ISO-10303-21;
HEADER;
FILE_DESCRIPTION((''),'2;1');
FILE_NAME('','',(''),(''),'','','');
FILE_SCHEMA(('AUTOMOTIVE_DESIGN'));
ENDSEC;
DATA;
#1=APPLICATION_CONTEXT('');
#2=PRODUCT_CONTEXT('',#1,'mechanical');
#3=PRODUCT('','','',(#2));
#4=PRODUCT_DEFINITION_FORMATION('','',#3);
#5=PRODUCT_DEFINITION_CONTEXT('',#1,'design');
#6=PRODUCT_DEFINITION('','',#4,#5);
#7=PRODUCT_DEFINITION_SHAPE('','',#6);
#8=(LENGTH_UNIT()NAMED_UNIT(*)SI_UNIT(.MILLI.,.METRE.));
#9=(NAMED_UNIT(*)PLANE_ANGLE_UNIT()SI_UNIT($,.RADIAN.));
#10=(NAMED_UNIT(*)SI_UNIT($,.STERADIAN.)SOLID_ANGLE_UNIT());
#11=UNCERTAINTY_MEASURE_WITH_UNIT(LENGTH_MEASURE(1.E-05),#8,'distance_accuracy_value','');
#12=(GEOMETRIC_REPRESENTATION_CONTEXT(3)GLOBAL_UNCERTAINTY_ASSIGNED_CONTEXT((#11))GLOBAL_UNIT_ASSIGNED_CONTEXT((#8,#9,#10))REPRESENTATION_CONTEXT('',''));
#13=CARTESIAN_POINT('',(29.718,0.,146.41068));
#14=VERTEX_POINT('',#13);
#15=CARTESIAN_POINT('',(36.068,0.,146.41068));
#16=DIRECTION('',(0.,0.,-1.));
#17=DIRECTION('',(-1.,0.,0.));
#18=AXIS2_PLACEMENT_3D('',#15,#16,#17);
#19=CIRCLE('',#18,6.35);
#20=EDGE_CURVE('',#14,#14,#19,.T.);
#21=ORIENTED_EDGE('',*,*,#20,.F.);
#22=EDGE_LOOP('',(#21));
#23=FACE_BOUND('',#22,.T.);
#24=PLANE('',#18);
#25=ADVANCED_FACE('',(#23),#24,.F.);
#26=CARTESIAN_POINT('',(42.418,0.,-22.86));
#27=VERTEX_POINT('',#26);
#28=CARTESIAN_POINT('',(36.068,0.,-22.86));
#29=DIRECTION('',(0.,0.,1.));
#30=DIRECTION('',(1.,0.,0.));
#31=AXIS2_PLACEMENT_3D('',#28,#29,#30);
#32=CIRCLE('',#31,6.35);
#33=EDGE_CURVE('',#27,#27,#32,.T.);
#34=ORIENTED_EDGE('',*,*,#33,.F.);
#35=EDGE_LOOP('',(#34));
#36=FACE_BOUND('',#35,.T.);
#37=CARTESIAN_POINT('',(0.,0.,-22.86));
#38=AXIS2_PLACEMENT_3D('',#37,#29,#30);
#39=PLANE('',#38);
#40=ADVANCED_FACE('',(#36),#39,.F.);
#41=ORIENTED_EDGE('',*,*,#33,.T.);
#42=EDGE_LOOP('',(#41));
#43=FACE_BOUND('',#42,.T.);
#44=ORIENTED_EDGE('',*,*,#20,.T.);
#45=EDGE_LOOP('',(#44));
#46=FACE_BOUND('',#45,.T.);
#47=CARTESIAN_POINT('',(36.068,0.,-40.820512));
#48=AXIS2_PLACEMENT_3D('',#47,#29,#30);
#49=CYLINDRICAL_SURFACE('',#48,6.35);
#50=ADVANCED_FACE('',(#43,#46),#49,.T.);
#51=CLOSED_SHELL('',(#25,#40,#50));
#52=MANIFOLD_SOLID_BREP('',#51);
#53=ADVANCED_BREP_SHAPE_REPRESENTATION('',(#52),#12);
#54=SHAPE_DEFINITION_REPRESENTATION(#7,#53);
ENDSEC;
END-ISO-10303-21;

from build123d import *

# Parameters (mm, degrees)
BOSS_EXTRUDE1_OUTLINE_R = 6.35
BOSS_EXTRUDE1_DEPTH     = 169.27068


# Read off the part's stored shape, not the designer's step: Boss-Extrude1
with BuildPart() as part:
    # Boss-Extrude1 outline → Boss-Extrude1 (new body)
    with BuildSketch(Plane(origin=(0, 0, 146.41068), x_dir=(-1, 0, 0), z_dir=(0, 0, -1))):
        with Locations((-36.068, 0)):
            Circle(BOSS_EXTRUDE1_OUTLINE_R)
    extrude(amount=BOSS_EXTRUDE1_DEPTH)


solid = part.part
